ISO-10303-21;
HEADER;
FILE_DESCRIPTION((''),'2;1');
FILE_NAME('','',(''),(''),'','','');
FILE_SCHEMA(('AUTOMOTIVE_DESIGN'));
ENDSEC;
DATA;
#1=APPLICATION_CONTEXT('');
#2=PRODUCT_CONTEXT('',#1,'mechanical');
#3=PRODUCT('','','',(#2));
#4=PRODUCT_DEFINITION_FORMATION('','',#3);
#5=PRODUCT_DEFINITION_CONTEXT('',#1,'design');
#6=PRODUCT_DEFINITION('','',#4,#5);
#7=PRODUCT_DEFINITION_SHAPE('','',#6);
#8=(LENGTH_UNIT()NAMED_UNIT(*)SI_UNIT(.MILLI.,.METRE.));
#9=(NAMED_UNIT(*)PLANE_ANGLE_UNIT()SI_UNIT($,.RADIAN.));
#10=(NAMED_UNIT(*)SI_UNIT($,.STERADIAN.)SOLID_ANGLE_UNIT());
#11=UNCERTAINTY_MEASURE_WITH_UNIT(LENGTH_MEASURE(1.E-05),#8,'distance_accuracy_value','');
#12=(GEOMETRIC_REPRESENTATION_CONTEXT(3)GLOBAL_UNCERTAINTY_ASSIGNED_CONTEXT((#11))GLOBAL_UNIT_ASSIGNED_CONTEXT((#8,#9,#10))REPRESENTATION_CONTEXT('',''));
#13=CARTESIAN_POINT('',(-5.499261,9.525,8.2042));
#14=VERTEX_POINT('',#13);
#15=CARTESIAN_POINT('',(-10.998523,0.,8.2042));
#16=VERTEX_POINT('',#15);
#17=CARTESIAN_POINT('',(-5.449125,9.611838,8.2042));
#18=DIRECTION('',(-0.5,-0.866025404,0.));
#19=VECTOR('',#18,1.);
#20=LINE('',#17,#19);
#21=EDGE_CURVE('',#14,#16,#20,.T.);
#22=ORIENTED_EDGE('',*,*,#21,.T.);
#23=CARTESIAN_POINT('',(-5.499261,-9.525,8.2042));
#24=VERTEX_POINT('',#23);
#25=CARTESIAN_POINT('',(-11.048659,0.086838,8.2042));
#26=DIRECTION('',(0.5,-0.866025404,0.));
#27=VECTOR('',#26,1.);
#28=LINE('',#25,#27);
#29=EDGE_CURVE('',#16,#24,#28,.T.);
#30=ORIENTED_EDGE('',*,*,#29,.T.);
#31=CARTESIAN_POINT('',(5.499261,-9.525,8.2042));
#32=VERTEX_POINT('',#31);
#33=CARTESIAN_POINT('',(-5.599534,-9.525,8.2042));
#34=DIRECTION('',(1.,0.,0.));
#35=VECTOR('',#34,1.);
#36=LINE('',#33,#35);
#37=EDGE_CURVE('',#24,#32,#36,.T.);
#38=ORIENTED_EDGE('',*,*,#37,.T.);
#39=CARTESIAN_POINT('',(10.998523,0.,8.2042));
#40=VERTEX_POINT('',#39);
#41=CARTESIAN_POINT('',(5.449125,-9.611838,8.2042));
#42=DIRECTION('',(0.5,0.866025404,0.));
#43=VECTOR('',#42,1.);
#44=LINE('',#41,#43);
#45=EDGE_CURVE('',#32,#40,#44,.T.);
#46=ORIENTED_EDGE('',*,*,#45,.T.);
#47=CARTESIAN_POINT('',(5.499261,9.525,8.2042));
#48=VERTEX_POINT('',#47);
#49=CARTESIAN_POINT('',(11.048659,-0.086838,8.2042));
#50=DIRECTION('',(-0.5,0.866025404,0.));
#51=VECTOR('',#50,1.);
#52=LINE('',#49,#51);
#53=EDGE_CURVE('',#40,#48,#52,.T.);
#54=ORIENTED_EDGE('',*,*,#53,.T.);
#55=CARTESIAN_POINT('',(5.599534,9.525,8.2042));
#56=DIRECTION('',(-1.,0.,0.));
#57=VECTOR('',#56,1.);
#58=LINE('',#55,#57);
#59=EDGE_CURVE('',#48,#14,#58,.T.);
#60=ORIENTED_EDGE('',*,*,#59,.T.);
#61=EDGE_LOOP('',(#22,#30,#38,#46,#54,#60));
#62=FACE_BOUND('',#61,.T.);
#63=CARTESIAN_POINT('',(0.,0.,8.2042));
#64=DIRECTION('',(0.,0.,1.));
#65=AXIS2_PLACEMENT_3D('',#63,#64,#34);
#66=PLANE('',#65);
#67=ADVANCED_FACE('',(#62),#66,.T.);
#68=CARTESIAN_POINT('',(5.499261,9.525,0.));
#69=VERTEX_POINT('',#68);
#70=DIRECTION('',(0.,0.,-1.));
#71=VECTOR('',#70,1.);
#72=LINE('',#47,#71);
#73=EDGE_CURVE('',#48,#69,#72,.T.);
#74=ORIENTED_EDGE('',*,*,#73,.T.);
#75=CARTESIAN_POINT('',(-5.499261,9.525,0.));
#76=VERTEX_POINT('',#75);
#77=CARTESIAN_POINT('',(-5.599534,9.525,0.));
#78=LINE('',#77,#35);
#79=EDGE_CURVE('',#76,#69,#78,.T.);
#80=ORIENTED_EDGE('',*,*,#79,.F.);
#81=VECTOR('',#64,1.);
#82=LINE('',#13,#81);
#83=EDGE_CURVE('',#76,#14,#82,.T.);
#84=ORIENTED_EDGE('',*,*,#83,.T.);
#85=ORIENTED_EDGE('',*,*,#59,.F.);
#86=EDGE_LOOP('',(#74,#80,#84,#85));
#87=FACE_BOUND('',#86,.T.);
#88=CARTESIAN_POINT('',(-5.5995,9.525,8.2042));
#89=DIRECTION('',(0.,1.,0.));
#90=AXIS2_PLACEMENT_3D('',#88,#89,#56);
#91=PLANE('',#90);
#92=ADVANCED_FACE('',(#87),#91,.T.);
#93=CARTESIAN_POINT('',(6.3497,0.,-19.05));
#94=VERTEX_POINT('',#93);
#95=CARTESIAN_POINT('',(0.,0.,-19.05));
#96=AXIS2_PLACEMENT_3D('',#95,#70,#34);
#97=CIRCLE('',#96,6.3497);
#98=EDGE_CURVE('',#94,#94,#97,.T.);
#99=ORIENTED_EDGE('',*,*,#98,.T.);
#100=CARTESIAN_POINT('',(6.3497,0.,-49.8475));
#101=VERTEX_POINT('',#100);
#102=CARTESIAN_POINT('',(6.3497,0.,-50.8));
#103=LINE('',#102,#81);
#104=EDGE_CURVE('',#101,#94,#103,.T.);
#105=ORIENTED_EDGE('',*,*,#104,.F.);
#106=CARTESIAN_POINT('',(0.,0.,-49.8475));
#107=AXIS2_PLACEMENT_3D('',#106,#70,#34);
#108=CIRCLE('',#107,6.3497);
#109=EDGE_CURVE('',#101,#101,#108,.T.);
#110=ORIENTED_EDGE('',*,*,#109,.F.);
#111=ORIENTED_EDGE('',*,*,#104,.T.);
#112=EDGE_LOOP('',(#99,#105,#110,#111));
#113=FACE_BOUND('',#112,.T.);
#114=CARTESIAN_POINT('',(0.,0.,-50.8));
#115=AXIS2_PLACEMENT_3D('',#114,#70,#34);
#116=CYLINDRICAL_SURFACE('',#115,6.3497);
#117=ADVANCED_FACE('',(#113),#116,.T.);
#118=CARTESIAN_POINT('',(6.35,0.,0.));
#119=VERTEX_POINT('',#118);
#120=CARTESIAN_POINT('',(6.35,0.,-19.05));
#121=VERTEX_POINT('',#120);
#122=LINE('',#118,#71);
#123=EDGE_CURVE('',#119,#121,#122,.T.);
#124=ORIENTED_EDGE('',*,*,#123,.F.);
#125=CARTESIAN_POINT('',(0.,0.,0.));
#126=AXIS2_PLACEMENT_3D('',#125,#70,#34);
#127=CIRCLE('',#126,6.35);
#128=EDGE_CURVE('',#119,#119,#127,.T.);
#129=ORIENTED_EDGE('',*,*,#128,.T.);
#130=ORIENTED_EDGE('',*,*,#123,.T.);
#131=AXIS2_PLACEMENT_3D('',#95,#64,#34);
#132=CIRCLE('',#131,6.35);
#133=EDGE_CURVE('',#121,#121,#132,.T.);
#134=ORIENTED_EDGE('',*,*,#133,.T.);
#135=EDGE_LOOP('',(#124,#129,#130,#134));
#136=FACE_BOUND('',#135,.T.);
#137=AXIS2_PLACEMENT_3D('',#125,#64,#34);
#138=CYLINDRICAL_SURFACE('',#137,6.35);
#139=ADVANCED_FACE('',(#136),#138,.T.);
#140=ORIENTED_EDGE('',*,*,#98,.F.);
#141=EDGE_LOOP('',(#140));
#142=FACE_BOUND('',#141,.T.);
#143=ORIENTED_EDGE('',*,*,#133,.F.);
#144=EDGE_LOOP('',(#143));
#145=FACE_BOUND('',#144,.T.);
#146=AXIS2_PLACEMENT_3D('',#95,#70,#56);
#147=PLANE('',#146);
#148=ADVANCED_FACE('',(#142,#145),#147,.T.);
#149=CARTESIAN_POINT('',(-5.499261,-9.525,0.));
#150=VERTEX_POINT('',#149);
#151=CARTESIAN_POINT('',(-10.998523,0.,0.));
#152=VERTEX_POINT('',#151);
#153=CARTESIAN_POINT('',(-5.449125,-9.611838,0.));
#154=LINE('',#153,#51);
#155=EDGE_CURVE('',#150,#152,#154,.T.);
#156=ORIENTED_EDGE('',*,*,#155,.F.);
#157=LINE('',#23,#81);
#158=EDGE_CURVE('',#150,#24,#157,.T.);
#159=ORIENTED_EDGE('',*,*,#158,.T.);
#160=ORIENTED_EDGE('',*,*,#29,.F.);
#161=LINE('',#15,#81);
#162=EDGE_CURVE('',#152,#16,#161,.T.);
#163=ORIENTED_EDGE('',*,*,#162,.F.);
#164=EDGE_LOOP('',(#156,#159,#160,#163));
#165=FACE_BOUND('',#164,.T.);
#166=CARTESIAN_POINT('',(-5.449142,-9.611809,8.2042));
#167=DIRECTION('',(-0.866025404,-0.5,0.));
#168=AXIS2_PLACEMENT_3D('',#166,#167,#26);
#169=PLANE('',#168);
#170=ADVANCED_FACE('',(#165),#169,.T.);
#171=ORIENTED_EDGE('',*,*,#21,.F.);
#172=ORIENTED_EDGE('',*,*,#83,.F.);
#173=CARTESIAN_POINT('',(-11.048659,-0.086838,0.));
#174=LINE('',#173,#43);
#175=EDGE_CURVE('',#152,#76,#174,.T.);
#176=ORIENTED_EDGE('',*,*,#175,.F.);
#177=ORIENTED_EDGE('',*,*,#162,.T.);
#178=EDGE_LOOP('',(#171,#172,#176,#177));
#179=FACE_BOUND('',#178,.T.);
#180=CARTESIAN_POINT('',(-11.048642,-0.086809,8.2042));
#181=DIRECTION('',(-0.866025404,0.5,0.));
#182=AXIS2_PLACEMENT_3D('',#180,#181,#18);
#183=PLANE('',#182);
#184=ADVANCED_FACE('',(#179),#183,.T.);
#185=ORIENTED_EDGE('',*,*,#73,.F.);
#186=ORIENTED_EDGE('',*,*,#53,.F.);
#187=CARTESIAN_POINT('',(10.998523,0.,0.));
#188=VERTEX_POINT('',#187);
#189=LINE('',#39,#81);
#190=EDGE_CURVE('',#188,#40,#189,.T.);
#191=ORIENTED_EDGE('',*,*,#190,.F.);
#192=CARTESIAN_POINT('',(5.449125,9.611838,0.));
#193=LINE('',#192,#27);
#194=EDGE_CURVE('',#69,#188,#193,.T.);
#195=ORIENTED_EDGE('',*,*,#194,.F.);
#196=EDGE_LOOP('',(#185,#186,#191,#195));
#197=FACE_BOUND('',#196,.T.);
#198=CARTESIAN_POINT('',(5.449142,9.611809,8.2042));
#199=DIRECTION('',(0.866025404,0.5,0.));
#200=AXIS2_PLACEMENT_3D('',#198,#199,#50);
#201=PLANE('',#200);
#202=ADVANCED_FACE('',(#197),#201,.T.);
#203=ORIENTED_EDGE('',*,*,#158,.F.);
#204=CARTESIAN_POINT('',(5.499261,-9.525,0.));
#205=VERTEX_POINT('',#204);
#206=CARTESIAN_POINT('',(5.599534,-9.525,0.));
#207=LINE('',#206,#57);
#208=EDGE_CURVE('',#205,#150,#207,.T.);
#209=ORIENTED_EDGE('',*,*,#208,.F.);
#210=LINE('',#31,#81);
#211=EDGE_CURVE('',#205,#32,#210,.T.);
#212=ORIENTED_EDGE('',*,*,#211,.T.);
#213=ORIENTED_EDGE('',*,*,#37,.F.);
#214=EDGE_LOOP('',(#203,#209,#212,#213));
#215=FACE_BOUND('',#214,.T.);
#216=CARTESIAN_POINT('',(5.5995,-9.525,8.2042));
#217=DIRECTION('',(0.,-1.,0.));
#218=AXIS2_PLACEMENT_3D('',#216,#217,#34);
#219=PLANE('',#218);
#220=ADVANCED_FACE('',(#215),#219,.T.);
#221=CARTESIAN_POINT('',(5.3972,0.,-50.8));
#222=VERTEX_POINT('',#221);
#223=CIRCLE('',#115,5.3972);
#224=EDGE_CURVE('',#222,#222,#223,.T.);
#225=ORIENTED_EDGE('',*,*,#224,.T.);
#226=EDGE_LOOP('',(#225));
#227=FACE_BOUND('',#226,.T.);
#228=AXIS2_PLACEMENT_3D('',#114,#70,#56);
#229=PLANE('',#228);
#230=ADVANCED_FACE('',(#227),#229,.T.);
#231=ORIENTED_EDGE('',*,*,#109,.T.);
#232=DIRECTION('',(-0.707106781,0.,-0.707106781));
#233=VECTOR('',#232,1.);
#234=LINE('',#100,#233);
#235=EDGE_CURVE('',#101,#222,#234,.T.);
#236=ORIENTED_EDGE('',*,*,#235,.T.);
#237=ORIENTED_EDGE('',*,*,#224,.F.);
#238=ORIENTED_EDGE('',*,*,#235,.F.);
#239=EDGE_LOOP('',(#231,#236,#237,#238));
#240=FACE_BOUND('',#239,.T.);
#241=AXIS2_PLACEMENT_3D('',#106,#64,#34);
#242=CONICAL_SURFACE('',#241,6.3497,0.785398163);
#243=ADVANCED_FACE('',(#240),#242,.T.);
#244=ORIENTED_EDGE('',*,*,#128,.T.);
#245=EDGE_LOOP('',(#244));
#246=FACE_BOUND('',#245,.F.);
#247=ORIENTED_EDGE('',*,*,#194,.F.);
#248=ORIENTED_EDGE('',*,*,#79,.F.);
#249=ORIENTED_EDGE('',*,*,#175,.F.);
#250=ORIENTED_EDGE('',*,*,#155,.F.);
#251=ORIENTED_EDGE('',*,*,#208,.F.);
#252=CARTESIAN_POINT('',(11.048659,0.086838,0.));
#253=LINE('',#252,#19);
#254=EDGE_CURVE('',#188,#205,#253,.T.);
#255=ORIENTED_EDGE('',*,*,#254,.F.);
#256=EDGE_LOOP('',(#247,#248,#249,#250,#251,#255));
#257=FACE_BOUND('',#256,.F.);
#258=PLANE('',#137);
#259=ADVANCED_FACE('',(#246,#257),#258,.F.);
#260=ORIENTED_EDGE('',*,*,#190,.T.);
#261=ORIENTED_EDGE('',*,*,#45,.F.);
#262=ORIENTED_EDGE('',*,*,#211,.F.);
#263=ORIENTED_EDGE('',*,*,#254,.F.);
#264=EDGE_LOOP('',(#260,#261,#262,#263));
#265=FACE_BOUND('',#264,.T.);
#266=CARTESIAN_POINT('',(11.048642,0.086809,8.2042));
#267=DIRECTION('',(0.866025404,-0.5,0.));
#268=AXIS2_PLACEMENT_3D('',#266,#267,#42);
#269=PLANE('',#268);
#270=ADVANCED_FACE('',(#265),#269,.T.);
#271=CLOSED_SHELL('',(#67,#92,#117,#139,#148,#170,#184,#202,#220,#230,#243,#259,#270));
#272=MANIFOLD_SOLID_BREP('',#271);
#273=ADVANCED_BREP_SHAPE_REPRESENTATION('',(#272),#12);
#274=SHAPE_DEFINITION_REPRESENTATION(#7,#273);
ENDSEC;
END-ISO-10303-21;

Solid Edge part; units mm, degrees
sketch "Sketch1" plane through (0, 0, 0) normal (0, 0, 1) x (1, 0, 0)
  circle A0 centre (0, 0) radius 11.049
  dimension "D1" = 22.098
extrude "Protrusion1" add sketch "Sketch1" along normal blind 8.2042
sketch "Sketch2" plane through (0, 0, 0) normal (0, 0, -1) x (1, 0, 0)
  circle A0 centre (0, 0) radius 6.35
extrude "Protrusion2" add sketch "Sketch2" along normal blind 50.8
sketch "Sketch3" plane through (0, 0, -50.8) normal (0, 0, -1) x (1, 0, 0)
  circle A0 centre (0, 0) radius 6.3497
extrude "Cutout1" cut sketch "Sketch3" against normal blind 31.75 flip side to cut
chamfer "Chamfer_1" distance 0.9525 angle 45 1 edges at (-6.3497, 0, -50.8)
sketch "Sketch4" plane through (0, 0, 8.2042) normal (0, 0, 1) x (1, 0, 0)
  line L0 (-5.5995, 9.525) -> (5.5995, 9.525)
  dimension "D1" = 19.05
extrude "Cutout2" cut sketch "Sketch4" against normal up to next material side at (0, 9.575, 8.2042)
pattern_circular "Pattern1" count 6 over 360 about axis through (0, 0, 8.2042) along (0, 0, 1) of "Cutout2"
properties part number "24102292"
